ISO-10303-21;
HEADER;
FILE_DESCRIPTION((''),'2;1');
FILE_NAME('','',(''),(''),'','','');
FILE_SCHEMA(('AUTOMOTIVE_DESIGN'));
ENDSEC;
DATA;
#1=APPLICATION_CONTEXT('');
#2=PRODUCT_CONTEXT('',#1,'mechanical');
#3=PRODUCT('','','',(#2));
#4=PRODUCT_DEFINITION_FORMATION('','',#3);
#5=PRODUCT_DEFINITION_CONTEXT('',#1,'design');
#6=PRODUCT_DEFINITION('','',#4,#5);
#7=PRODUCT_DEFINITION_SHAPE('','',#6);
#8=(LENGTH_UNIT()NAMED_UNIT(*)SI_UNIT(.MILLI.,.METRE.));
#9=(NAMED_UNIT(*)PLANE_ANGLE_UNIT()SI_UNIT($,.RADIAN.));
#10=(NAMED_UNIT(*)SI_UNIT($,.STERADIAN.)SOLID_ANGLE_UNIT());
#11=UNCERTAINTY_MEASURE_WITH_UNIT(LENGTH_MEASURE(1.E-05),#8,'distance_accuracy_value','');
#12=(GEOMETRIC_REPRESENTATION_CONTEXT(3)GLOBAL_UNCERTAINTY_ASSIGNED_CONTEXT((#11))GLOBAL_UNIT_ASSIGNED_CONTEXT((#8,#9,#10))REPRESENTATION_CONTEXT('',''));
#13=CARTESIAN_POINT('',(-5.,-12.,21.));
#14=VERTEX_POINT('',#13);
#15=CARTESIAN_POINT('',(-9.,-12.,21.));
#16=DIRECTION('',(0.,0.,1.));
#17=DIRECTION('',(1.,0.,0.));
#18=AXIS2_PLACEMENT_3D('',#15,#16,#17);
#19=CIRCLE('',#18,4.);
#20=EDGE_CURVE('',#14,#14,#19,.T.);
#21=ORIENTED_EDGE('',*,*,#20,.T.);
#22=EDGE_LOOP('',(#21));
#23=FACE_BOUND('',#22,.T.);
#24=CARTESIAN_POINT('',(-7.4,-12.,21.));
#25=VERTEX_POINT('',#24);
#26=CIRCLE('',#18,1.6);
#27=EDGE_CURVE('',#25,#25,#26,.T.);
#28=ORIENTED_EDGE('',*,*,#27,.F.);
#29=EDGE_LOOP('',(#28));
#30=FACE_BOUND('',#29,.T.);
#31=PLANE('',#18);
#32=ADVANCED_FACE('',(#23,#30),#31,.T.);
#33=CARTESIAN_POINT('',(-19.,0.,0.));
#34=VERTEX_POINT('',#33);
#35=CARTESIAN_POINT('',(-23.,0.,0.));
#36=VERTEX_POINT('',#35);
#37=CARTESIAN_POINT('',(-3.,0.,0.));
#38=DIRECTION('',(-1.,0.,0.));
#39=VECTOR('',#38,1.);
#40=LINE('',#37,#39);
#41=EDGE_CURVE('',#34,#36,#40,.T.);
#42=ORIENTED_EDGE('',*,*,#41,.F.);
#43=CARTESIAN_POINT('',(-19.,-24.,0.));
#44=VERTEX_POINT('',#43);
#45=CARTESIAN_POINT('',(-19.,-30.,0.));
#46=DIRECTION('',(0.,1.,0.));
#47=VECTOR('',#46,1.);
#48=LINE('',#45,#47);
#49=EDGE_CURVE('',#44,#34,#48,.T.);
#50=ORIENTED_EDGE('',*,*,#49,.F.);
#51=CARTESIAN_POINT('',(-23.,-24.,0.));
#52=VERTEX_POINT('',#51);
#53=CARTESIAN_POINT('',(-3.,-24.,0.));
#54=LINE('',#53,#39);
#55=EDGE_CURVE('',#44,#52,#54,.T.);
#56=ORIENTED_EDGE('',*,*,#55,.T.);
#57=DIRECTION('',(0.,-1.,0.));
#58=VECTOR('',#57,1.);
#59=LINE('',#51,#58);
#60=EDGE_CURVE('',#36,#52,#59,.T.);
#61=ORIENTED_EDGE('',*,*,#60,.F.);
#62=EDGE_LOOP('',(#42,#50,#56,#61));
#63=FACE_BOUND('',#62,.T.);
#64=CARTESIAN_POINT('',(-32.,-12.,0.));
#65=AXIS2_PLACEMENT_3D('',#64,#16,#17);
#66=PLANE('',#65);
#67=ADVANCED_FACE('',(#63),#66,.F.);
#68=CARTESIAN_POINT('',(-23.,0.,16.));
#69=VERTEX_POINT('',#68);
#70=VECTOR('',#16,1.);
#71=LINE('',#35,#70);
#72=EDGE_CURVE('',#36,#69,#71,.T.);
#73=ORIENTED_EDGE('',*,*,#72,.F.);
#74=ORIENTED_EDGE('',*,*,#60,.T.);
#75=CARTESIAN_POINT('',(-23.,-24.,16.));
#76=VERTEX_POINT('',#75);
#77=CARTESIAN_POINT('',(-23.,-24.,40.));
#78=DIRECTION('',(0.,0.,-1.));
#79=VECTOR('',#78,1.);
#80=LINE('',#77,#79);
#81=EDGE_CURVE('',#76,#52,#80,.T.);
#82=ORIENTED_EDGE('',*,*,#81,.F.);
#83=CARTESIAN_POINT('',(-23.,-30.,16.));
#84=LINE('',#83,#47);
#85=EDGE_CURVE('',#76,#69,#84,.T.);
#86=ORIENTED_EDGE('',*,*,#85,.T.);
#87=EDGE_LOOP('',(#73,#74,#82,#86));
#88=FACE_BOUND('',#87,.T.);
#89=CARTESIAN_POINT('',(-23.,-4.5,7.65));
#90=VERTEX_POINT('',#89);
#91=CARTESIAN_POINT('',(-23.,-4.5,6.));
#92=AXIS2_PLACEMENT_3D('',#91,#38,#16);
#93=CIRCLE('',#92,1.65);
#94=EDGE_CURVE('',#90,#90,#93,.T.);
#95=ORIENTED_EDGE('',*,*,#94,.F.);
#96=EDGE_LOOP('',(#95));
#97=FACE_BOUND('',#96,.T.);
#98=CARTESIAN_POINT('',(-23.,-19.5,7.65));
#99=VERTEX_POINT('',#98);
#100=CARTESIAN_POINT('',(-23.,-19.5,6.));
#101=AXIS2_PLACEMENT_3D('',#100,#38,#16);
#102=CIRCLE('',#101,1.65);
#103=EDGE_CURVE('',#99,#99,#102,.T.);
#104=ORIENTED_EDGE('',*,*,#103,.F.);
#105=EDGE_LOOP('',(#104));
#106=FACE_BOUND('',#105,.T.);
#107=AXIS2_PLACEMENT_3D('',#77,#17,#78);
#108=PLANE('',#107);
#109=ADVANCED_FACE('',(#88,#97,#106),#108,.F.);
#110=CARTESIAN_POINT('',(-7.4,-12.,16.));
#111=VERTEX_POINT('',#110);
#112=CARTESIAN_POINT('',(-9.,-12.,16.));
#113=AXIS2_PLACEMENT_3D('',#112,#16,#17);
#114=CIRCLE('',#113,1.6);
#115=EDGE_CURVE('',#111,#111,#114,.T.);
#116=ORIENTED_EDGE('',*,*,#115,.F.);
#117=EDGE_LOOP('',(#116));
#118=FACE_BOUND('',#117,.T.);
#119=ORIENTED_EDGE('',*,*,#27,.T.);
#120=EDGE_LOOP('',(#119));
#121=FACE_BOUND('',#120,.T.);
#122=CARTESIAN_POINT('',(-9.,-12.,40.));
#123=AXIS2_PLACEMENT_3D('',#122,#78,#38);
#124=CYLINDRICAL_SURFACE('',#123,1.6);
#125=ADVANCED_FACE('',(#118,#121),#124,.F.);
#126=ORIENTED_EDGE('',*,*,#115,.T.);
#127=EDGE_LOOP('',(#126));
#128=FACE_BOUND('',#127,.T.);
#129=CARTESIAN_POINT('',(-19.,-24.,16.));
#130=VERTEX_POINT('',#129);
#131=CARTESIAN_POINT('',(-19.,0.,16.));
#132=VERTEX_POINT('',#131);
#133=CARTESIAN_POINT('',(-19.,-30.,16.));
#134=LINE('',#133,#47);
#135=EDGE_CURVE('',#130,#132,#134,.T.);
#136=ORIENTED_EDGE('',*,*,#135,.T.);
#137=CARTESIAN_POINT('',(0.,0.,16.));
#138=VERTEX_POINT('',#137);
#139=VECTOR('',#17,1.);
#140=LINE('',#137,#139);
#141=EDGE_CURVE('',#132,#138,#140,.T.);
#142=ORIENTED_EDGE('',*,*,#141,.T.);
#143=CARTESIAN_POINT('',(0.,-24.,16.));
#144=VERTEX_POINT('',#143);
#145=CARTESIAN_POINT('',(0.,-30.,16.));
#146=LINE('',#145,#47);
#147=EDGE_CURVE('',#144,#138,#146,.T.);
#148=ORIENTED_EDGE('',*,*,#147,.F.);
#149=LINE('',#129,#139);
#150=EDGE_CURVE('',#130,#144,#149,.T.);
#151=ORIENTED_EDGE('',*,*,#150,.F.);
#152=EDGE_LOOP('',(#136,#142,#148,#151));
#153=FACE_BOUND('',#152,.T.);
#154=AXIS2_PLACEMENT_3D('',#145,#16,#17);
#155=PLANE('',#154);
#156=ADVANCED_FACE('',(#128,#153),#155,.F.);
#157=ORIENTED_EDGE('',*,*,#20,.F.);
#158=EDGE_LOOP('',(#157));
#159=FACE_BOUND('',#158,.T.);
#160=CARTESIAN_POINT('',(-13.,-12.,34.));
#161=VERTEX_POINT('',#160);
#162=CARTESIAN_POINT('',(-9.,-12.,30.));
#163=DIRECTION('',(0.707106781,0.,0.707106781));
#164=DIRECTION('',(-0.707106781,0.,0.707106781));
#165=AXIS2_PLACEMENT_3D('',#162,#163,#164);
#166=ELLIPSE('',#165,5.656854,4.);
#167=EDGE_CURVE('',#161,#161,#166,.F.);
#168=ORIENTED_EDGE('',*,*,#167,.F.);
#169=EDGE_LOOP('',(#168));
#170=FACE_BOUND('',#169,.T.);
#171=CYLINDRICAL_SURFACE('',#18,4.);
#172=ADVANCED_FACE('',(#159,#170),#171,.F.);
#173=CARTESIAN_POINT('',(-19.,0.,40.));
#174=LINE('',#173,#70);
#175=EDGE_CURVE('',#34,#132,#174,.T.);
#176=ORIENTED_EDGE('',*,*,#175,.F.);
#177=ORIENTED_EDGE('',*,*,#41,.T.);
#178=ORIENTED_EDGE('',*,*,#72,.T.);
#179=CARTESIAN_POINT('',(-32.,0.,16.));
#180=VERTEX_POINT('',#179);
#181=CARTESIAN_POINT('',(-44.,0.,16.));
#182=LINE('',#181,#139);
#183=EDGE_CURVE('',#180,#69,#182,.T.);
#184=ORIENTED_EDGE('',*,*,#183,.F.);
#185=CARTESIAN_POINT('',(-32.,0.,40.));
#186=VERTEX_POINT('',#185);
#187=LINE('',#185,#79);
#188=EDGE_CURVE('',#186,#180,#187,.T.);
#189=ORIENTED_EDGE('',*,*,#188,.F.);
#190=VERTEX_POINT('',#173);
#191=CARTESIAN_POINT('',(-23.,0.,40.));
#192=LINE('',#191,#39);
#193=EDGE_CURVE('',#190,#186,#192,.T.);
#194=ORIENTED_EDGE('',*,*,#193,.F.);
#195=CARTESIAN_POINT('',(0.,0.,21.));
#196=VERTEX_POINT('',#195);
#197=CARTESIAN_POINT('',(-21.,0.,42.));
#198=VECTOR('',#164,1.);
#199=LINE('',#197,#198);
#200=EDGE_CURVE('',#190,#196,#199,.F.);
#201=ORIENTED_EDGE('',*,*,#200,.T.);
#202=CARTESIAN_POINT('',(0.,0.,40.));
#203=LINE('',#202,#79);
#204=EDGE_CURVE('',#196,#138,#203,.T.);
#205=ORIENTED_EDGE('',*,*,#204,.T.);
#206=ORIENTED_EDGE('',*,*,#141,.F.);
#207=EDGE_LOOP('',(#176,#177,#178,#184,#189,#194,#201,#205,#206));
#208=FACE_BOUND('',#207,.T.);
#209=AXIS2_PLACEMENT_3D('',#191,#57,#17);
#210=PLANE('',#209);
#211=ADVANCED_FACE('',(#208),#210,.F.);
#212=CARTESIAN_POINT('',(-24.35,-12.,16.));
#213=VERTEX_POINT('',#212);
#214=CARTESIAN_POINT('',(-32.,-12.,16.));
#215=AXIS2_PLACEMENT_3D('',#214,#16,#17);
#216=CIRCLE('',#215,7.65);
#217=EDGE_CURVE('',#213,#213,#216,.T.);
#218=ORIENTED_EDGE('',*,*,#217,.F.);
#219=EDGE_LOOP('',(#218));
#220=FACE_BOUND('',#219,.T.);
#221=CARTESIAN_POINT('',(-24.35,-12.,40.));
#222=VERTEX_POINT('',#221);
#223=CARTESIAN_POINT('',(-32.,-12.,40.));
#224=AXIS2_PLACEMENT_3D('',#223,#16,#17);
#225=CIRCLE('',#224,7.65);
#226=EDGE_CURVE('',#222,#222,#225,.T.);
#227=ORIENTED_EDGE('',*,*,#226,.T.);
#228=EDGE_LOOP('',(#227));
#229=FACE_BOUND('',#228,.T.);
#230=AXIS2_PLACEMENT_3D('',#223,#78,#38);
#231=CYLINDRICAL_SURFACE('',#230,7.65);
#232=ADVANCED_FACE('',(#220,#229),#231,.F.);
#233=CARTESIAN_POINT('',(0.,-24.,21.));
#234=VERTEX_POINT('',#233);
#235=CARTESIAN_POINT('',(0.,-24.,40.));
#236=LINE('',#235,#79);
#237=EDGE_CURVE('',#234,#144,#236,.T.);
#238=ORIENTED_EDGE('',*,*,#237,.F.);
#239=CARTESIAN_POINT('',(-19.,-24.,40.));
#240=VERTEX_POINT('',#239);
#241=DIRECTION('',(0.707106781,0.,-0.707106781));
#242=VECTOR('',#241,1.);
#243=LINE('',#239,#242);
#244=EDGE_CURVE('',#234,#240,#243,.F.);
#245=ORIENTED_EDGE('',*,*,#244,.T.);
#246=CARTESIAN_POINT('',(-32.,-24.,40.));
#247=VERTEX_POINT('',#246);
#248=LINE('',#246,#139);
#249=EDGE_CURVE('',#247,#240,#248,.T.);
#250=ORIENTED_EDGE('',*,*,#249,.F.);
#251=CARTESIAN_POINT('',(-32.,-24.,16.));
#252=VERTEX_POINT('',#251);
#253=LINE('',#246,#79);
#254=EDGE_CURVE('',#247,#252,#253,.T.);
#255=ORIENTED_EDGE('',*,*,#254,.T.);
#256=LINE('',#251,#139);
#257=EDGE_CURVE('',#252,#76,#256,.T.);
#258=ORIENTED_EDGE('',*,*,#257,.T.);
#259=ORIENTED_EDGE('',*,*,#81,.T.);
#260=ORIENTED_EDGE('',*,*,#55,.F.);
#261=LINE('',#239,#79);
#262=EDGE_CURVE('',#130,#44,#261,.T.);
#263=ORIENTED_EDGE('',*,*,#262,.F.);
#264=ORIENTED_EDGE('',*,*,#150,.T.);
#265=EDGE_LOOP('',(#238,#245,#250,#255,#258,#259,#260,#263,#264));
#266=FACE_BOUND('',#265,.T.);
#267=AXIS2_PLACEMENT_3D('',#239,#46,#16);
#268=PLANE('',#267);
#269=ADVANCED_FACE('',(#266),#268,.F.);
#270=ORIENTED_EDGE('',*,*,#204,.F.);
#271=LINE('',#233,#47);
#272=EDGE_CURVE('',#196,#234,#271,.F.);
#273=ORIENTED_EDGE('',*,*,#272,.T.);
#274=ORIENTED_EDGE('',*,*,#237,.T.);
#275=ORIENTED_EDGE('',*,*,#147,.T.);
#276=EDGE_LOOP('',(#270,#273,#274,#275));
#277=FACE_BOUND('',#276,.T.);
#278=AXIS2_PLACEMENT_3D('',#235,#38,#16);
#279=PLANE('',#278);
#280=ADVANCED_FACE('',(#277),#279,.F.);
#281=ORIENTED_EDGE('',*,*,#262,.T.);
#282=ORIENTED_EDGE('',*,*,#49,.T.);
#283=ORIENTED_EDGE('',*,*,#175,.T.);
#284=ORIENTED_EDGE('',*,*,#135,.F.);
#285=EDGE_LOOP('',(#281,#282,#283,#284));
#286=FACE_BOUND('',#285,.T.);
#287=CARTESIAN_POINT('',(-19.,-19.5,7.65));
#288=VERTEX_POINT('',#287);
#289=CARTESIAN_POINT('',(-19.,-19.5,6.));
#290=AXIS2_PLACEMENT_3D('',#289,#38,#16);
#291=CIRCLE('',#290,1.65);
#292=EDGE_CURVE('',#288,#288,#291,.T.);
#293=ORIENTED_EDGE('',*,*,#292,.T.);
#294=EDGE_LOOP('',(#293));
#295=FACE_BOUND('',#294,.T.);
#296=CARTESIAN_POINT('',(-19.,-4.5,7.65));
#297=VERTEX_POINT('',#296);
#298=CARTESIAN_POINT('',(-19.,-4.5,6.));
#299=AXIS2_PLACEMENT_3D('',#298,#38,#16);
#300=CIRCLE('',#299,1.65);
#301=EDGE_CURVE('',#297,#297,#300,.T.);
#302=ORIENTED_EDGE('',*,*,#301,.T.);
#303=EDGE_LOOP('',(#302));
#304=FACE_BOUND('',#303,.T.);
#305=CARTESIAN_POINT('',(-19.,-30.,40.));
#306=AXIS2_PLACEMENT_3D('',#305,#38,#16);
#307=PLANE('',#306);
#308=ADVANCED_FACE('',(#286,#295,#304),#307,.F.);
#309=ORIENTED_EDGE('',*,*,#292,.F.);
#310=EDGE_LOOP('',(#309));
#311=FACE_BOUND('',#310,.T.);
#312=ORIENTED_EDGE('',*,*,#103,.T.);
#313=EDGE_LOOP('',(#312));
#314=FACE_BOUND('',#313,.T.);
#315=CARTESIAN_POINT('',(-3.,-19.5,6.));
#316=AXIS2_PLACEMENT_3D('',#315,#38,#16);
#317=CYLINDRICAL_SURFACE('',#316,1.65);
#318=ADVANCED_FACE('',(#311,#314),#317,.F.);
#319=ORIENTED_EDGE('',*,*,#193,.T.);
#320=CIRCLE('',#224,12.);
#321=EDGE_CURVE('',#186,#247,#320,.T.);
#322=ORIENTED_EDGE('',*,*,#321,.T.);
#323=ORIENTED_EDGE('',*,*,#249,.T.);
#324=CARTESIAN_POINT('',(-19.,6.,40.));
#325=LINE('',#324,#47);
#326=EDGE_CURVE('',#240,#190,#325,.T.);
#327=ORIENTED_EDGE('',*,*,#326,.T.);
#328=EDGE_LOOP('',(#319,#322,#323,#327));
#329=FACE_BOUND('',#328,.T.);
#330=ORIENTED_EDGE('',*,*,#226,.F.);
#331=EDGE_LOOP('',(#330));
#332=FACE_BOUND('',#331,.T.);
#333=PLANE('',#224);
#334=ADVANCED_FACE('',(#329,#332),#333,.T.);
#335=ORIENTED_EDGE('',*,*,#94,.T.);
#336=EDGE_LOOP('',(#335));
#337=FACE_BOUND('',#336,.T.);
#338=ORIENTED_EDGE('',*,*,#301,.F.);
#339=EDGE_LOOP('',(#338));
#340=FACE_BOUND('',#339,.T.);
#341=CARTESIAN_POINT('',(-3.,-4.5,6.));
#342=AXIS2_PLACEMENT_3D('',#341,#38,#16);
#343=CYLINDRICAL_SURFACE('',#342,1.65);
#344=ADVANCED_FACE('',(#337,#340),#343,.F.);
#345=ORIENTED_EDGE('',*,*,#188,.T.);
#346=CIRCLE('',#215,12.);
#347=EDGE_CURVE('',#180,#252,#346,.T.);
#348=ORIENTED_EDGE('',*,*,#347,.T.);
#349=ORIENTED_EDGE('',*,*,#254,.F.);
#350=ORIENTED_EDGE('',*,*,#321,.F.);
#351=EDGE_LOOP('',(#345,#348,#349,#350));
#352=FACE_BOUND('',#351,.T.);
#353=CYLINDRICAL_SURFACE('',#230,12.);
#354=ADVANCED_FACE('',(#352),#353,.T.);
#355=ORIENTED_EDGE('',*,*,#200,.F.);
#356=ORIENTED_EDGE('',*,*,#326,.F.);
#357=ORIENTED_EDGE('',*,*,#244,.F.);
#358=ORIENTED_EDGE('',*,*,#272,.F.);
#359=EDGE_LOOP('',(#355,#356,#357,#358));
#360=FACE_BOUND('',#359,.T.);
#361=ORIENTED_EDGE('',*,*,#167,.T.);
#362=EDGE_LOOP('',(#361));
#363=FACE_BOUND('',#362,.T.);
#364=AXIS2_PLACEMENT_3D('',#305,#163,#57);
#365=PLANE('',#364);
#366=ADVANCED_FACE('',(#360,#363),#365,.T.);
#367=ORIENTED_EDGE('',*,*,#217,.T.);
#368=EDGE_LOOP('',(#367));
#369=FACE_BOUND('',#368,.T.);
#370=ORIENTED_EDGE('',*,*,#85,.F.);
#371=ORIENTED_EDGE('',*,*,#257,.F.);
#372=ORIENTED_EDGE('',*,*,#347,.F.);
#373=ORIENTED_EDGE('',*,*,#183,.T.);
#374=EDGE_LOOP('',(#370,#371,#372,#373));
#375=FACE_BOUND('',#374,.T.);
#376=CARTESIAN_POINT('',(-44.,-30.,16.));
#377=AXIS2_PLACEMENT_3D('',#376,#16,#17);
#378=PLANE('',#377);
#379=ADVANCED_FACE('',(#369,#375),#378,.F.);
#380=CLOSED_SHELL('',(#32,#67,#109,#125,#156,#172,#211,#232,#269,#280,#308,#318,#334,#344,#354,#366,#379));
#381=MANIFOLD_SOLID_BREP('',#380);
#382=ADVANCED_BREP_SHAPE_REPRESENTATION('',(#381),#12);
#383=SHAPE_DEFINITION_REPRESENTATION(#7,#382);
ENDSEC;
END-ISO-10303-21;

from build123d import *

# Parameters (mm, degrees)
ESBO_O1_R                = 7.65
ESBO_O1_R_2              = 1.6
RESSALTO_EXTRUS_O1_DEPTH = 40
ESBO_O2_W                = 19
ESBO_O2_H                = 20
ESBO_O2_W_2              = 21
ESBO_O2_H_2              = 16
CORTE_EXTRUS_O1_DEPTH    = 67.603303221
ESBO_O3_R                = 1.65
ESBO_O3_W                = 40
ESBO_O3_H                = 6
CORTE_EXTRUS_O2_DEPTH    = 20
CHANFRO2_SIZE            = 20
ESBO_O4_R                = 4
CORTE_EXTRUS_O3_DEPTH    = 19


with BuildPart() as part:
    # Esboço1 → Ressalto-extrusão1 (new body)
    with BuildSketch(Plane.XY):
        with BuildLine():
            Line((0, 0), (-19, 0))
            Line((-19, 0), (-19, 6))
            Line((-19, 6), (-23, 6))
            Line((-23, 6), (-23, 0))
            Line((-23, 0), (-32, 0))
            ThreePointArc((-32, 0), (-44, -12), (-32, -24))
            Line((-32, -24), (-23, -24))
            Line((-23, -24), (-23, -30))
            Line((-23, -30), (-19, -30))
            Line((-19, -30), (-19, -24))
            Line((-19, -24), (0, -24))
            Line((0, -24), (0, 0))
        make_face()
        with Locations((-32, -12)):
            Circle(ESBO_O1_R, mode=Mode.SUBTRACT)
        with Locations((-9, -12)):
            Circle(ESBO_O1_R_2, mode=Mode.SUBTRACT)
    extrude(amount=RESSALTO_EXTRUS_O1_DEPTH)

    # Esboço2 → Corte-extrusão1 (cut, through all)
    with BuildSketch(Plane(origin=(0, 0, 0), x_dir=(1, 0, 0), z_dir=(0, 1, 0))):
        with Locations((-9.5, -30)):
            Rectangle(ESBO_O2_W, ESBO_O2_H)
        with Locations((-33.5, -8)):
            Rectangle(ESBO_O2_W_2, ESBO_O2_H_2)
        with Locations((-9.5, -8)):
            Rectangle(ESBO_O2_W, ESBO_O2_H_2)
    extrude(amount=-CORTE_EXTRUS_O1_DEPTH, mode=Mode.SUBTRACT)

    # Esboço3 → Corte-extrusão2 (cut)
    with BuildSketch(Plane.ZY.offset(23)):
        with Locations((6, -4.5)):
            Circle(ESBO_O3_R)
        with Locations((6, -19.5)):
            Circle(ESBO_O3_R)
        with Locations((20, 3)):
            Rectangle(ESBO_O3_W, ESBO_O3_H)
        with Locations((20, -27)):
            Rectangle(ESBO_O3_W, ESBO_O3_H)
    extrude(amount=-CORTE_EXTRUS_O2_DEPTH, mode=Mode.SUBTRACT)

    # Chanfro2
    # the kernel refuses this chamfer: 20 mm, written as the material it adds along each edge
    with BuildSketch(Plane(origin=(-19, 0, 20), x_dir=(0.9996219169112968, 0, -0.02749587661058649), z_dir=(0, -1, 0))) as chanfro2_piece_1_section:
        Polygon((CHANFRO2_SIZE * 0.999621916911, CHANFRO2_SIZE * 0.0274958766106), (-CHANFRO2_SIZE * 0.0274958766106, CHANFRO2_SIZE * 0.999621916911), (0, 0), align=None)
    chanfro2_piece_1 = extrude(amount=24, mode=Mode.PRIVATE)
    chanfro2_piece_1 = chanfro2_piece_1 - Plane(origin=(-9, -12, 26.656748397), x_dir=(1, 0, 0), z_dir=(0, 0, -1)) * Cylinder(1.6, 128, mode=Mode.PRIVATE)
    chanfro2_piece_1 = split(chanfro2_piece_1, bisect_by=Plane(origin=(0, -11.999999472, 26.656748397), z_dir=(-1, 0, 0)), keep=Keep.TOP, mode=Mode.PRIVATE)
    chanfro2_piece_1 = split(chanfro2_piece_1, bisect_by=Plane(origin=(-12.552402044, -11.999999472, 40), z_dir=(0, 0, -1)), keep=Keep.TOP, mode=Mode.PRIVATE)
    add(chanfro2_piece_1)

    # Esboço4 → Corte-extrusão3 (cut)
    with BuildSketch(Plane.XY.offset(40)):
        with Locations((-9, -12)):
            Circle(ESBO_O4_R)
    extrude(amount=-CORTE_EXTRUS_O3_DEPTH, mode=Mode.SUBTRACT)


solid = part.part
